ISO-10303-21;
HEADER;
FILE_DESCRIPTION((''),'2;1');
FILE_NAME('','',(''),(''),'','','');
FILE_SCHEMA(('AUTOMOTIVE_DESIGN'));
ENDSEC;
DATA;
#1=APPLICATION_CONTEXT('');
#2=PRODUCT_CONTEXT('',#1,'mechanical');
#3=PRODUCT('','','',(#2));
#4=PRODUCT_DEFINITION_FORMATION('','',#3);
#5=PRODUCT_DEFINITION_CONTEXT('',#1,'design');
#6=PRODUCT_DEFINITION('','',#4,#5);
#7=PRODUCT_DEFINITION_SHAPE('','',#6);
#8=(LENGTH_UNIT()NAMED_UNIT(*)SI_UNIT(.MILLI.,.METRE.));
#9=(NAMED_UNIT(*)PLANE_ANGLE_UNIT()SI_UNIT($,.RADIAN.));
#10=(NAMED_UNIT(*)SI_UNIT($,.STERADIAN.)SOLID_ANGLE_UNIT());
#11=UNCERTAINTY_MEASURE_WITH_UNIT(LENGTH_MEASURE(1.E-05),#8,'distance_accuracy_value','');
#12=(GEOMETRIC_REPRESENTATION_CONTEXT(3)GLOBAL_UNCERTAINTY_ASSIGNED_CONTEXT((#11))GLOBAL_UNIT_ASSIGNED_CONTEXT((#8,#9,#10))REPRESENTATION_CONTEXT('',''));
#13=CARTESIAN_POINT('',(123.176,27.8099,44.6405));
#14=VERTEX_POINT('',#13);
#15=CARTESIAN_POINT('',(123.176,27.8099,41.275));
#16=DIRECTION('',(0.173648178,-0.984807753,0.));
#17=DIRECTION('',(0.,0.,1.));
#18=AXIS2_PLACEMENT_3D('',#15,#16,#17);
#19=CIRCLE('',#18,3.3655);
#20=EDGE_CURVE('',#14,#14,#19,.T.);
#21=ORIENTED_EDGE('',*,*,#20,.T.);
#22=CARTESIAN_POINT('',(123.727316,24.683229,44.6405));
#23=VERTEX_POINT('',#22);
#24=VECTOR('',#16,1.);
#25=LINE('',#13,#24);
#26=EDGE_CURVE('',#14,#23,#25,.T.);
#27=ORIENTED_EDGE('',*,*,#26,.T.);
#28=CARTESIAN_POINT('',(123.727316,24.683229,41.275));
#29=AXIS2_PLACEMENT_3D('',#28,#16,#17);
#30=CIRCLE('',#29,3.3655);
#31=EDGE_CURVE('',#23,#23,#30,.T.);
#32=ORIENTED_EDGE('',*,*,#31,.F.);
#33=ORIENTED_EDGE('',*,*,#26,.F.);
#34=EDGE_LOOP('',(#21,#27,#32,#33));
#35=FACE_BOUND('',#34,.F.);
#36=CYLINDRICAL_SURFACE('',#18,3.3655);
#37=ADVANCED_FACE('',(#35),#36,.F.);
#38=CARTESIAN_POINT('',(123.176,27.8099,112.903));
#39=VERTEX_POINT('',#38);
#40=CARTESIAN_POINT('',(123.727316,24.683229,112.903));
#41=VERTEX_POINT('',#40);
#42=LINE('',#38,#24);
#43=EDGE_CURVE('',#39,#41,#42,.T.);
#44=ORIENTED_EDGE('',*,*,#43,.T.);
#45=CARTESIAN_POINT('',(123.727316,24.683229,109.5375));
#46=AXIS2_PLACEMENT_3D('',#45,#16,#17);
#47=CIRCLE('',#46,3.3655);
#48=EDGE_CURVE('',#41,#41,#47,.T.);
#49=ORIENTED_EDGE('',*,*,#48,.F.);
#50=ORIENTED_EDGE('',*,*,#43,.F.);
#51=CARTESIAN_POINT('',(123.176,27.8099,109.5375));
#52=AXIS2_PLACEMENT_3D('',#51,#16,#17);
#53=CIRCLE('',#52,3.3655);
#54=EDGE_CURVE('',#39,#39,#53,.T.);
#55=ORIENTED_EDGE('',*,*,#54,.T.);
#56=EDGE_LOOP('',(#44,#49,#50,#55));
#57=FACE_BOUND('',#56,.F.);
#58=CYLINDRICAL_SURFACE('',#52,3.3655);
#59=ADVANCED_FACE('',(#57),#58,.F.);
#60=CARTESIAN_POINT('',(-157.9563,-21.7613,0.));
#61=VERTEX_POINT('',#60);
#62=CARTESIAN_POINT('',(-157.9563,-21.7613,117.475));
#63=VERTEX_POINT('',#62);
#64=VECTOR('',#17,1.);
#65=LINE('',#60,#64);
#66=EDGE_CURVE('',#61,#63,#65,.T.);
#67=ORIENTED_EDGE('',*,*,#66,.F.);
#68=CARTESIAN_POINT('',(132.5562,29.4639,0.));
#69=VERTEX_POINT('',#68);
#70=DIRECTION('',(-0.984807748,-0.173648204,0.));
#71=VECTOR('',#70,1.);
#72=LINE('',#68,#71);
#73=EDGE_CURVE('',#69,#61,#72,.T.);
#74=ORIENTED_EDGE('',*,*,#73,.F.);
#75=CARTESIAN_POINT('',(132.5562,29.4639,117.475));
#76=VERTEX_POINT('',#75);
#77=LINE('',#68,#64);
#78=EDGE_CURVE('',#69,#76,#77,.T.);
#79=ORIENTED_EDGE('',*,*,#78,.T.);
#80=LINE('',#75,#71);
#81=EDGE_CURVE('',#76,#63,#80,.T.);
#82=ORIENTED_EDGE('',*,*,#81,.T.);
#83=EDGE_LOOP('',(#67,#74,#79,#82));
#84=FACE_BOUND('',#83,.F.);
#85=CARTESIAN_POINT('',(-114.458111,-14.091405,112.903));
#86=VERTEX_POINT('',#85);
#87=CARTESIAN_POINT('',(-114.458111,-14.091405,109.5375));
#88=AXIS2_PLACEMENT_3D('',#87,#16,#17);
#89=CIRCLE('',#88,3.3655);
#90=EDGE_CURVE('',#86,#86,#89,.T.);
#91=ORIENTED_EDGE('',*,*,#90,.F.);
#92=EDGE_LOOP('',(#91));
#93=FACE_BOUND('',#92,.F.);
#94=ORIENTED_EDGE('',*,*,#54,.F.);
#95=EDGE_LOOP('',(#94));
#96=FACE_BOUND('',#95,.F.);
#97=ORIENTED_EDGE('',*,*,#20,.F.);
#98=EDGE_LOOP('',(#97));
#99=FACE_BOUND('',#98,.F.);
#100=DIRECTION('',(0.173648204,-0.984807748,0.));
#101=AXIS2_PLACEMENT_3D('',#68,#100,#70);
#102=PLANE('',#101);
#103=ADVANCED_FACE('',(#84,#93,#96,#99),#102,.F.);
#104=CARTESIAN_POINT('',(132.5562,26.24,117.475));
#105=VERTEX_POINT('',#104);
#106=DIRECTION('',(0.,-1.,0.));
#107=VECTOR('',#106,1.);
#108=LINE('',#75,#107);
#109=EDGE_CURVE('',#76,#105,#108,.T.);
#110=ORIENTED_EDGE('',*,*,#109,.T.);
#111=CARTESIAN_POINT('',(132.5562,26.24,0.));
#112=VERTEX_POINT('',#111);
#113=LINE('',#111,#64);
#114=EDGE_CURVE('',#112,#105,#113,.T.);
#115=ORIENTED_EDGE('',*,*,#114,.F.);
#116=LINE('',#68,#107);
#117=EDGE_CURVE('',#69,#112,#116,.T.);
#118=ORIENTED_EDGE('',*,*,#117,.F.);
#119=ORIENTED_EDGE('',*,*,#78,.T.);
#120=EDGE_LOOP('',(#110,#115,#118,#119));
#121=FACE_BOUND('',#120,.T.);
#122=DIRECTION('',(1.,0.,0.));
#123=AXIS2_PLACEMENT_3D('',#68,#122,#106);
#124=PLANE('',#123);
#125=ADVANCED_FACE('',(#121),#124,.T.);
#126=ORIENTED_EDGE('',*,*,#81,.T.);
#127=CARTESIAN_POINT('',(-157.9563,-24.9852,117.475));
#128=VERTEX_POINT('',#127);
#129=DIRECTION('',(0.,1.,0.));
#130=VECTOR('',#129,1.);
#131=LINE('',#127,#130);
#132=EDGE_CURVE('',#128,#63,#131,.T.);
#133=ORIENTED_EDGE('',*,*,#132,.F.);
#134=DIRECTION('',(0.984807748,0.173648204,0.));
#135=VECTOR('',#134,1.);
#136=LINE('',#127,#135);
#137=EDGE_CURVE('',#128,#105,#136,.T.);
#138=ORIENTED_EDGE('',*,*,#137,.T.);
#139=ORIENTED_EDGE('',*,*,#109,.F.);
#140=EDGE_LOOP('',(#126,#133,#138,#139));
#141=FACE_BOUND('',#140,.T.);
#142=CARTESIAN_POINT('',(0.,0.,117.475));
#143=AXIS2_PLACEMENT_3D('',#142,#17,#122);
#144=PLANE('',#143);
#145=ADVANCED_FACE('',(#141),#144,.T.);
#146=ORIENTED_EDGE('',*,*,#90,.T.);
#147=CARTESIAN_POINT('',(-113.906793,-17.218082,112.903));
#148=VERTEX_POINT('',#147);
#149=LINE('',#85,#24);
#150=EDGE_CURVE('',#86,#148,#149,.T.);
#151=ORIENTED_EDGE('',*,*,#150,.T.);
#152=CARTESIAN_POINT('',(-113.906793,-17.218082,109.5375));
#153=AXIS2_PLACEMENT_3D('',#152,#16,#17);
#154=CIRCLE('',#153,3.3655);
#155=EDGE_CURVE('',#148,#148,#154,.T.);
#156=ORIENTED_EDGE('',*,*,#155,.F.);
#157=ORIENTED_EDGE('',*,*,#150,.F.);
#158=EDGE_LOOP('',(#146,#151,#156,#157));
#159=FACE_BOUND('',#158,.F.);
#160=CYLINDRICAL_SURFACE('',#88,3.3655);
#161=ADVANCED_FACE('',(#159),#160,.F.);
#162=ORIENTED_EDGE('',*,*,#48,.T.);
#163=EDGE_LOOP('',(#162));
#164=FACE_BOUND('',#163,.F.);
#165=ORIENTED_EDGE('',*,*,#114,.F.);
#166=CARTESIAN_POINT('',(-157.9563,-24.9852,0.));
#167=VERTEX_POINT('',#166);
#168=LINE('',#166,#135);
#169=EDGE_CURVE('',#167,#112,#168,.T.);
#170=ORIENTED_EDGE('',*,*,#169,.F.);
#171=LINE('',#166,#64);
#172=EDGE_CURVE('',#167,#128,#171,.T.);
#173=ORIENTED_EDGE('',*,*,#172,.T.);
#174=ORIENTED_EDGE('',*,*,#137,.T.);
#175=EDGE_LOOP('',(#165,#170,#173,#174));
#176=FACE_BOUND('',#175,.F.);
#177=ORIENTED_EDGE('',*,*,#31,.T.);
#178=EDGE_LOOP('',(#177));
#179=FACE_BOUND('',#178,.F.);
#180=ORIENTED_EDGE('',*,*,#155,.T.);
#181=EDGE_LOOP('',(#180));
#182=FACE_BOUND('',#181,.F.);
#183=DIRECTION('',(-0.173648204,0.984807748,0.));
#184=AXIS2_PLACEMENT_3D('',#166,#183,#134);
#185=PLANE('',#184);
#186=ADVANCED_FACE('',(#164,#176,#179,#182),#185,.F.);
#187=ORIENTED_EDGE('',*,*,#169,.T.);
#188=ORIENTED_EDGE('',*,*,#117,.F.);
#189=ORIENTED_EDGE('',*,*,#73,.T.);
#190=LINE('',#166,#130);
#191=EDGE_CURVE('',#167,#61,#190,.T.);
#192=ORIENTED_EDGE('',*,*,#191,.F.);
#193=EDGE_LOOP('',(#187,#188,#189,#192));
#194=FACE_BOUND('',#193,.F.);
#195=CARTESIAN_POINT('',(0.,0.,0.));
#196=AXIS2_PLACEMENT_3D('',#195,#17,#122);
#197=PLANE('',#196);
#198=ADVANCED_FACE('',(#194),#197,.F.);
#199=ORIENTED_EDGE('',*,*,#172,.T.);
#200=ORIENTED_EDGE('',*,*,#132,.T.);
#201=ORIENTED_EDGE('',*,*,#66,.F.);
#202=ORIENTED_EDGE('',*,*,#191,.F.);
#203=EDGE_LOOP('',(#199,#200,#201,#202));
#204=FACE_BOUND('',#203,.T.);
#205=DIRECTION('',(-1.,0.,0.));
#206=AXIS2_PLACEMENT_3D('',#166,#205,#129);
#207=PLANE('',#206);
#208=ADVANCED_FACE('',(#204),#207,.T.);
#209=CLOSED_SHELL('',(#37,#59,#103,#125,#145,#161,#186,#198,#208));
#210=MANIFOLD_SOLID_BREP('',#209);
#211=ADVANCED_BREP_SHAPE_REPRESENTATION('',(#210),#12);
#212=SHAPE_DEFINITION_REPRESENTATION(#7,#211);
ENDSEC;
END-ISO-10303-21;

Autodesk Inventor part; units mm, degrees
ref_plane "YZ Plane" through (0, 0, 0) normal (1, 0, 0) x (0, 1, 0)
ref_plane "XZ Plane" through (0, 0, 0) normal (0, 1, 0) x (-1, 0, 0)
ref_plane "XY Plane" through (0, 0, 0) normal (0, 0, 1) x (1, 0, 0)
sketch "Sketch1" plane through (0, 0, 0) normal (0, 0, 1) x (1, 0, 0)
  line L0 (-157.9563, -24.9852) -> (132.5562, 26.24) projected
  line L1 (132.5562, 29.4639) -> (132.5562, 26.24) projected
  line L2 (132.5562, 29.4639) -> (-157.9563, -21.7613) projected
  line L3 (-157.9563, -24.9852) -> (-157.9563, -21.7613) projected
  point P0 (0, 0)
extrude "Extrusion1" add sketch "Sketch1" along normal blind 117.475
hole "Hole1" at (123.176, 27.8099, 109.5375) direction (0.1736482, -0.9848078, 0) diameter 6.731 depth 25.4 tip angle 118
pattern_linear "Rectangular Pattern1" count 2 spacing 241.3 along (-0.9848078, -0.1736482, 0) of "Hole1"
pattern_linear "Rectangular Pattern2" count 2 spacing 68.2625 along (0, 0, -1) of "Hole1"
properties part number "GE-12087-03"
